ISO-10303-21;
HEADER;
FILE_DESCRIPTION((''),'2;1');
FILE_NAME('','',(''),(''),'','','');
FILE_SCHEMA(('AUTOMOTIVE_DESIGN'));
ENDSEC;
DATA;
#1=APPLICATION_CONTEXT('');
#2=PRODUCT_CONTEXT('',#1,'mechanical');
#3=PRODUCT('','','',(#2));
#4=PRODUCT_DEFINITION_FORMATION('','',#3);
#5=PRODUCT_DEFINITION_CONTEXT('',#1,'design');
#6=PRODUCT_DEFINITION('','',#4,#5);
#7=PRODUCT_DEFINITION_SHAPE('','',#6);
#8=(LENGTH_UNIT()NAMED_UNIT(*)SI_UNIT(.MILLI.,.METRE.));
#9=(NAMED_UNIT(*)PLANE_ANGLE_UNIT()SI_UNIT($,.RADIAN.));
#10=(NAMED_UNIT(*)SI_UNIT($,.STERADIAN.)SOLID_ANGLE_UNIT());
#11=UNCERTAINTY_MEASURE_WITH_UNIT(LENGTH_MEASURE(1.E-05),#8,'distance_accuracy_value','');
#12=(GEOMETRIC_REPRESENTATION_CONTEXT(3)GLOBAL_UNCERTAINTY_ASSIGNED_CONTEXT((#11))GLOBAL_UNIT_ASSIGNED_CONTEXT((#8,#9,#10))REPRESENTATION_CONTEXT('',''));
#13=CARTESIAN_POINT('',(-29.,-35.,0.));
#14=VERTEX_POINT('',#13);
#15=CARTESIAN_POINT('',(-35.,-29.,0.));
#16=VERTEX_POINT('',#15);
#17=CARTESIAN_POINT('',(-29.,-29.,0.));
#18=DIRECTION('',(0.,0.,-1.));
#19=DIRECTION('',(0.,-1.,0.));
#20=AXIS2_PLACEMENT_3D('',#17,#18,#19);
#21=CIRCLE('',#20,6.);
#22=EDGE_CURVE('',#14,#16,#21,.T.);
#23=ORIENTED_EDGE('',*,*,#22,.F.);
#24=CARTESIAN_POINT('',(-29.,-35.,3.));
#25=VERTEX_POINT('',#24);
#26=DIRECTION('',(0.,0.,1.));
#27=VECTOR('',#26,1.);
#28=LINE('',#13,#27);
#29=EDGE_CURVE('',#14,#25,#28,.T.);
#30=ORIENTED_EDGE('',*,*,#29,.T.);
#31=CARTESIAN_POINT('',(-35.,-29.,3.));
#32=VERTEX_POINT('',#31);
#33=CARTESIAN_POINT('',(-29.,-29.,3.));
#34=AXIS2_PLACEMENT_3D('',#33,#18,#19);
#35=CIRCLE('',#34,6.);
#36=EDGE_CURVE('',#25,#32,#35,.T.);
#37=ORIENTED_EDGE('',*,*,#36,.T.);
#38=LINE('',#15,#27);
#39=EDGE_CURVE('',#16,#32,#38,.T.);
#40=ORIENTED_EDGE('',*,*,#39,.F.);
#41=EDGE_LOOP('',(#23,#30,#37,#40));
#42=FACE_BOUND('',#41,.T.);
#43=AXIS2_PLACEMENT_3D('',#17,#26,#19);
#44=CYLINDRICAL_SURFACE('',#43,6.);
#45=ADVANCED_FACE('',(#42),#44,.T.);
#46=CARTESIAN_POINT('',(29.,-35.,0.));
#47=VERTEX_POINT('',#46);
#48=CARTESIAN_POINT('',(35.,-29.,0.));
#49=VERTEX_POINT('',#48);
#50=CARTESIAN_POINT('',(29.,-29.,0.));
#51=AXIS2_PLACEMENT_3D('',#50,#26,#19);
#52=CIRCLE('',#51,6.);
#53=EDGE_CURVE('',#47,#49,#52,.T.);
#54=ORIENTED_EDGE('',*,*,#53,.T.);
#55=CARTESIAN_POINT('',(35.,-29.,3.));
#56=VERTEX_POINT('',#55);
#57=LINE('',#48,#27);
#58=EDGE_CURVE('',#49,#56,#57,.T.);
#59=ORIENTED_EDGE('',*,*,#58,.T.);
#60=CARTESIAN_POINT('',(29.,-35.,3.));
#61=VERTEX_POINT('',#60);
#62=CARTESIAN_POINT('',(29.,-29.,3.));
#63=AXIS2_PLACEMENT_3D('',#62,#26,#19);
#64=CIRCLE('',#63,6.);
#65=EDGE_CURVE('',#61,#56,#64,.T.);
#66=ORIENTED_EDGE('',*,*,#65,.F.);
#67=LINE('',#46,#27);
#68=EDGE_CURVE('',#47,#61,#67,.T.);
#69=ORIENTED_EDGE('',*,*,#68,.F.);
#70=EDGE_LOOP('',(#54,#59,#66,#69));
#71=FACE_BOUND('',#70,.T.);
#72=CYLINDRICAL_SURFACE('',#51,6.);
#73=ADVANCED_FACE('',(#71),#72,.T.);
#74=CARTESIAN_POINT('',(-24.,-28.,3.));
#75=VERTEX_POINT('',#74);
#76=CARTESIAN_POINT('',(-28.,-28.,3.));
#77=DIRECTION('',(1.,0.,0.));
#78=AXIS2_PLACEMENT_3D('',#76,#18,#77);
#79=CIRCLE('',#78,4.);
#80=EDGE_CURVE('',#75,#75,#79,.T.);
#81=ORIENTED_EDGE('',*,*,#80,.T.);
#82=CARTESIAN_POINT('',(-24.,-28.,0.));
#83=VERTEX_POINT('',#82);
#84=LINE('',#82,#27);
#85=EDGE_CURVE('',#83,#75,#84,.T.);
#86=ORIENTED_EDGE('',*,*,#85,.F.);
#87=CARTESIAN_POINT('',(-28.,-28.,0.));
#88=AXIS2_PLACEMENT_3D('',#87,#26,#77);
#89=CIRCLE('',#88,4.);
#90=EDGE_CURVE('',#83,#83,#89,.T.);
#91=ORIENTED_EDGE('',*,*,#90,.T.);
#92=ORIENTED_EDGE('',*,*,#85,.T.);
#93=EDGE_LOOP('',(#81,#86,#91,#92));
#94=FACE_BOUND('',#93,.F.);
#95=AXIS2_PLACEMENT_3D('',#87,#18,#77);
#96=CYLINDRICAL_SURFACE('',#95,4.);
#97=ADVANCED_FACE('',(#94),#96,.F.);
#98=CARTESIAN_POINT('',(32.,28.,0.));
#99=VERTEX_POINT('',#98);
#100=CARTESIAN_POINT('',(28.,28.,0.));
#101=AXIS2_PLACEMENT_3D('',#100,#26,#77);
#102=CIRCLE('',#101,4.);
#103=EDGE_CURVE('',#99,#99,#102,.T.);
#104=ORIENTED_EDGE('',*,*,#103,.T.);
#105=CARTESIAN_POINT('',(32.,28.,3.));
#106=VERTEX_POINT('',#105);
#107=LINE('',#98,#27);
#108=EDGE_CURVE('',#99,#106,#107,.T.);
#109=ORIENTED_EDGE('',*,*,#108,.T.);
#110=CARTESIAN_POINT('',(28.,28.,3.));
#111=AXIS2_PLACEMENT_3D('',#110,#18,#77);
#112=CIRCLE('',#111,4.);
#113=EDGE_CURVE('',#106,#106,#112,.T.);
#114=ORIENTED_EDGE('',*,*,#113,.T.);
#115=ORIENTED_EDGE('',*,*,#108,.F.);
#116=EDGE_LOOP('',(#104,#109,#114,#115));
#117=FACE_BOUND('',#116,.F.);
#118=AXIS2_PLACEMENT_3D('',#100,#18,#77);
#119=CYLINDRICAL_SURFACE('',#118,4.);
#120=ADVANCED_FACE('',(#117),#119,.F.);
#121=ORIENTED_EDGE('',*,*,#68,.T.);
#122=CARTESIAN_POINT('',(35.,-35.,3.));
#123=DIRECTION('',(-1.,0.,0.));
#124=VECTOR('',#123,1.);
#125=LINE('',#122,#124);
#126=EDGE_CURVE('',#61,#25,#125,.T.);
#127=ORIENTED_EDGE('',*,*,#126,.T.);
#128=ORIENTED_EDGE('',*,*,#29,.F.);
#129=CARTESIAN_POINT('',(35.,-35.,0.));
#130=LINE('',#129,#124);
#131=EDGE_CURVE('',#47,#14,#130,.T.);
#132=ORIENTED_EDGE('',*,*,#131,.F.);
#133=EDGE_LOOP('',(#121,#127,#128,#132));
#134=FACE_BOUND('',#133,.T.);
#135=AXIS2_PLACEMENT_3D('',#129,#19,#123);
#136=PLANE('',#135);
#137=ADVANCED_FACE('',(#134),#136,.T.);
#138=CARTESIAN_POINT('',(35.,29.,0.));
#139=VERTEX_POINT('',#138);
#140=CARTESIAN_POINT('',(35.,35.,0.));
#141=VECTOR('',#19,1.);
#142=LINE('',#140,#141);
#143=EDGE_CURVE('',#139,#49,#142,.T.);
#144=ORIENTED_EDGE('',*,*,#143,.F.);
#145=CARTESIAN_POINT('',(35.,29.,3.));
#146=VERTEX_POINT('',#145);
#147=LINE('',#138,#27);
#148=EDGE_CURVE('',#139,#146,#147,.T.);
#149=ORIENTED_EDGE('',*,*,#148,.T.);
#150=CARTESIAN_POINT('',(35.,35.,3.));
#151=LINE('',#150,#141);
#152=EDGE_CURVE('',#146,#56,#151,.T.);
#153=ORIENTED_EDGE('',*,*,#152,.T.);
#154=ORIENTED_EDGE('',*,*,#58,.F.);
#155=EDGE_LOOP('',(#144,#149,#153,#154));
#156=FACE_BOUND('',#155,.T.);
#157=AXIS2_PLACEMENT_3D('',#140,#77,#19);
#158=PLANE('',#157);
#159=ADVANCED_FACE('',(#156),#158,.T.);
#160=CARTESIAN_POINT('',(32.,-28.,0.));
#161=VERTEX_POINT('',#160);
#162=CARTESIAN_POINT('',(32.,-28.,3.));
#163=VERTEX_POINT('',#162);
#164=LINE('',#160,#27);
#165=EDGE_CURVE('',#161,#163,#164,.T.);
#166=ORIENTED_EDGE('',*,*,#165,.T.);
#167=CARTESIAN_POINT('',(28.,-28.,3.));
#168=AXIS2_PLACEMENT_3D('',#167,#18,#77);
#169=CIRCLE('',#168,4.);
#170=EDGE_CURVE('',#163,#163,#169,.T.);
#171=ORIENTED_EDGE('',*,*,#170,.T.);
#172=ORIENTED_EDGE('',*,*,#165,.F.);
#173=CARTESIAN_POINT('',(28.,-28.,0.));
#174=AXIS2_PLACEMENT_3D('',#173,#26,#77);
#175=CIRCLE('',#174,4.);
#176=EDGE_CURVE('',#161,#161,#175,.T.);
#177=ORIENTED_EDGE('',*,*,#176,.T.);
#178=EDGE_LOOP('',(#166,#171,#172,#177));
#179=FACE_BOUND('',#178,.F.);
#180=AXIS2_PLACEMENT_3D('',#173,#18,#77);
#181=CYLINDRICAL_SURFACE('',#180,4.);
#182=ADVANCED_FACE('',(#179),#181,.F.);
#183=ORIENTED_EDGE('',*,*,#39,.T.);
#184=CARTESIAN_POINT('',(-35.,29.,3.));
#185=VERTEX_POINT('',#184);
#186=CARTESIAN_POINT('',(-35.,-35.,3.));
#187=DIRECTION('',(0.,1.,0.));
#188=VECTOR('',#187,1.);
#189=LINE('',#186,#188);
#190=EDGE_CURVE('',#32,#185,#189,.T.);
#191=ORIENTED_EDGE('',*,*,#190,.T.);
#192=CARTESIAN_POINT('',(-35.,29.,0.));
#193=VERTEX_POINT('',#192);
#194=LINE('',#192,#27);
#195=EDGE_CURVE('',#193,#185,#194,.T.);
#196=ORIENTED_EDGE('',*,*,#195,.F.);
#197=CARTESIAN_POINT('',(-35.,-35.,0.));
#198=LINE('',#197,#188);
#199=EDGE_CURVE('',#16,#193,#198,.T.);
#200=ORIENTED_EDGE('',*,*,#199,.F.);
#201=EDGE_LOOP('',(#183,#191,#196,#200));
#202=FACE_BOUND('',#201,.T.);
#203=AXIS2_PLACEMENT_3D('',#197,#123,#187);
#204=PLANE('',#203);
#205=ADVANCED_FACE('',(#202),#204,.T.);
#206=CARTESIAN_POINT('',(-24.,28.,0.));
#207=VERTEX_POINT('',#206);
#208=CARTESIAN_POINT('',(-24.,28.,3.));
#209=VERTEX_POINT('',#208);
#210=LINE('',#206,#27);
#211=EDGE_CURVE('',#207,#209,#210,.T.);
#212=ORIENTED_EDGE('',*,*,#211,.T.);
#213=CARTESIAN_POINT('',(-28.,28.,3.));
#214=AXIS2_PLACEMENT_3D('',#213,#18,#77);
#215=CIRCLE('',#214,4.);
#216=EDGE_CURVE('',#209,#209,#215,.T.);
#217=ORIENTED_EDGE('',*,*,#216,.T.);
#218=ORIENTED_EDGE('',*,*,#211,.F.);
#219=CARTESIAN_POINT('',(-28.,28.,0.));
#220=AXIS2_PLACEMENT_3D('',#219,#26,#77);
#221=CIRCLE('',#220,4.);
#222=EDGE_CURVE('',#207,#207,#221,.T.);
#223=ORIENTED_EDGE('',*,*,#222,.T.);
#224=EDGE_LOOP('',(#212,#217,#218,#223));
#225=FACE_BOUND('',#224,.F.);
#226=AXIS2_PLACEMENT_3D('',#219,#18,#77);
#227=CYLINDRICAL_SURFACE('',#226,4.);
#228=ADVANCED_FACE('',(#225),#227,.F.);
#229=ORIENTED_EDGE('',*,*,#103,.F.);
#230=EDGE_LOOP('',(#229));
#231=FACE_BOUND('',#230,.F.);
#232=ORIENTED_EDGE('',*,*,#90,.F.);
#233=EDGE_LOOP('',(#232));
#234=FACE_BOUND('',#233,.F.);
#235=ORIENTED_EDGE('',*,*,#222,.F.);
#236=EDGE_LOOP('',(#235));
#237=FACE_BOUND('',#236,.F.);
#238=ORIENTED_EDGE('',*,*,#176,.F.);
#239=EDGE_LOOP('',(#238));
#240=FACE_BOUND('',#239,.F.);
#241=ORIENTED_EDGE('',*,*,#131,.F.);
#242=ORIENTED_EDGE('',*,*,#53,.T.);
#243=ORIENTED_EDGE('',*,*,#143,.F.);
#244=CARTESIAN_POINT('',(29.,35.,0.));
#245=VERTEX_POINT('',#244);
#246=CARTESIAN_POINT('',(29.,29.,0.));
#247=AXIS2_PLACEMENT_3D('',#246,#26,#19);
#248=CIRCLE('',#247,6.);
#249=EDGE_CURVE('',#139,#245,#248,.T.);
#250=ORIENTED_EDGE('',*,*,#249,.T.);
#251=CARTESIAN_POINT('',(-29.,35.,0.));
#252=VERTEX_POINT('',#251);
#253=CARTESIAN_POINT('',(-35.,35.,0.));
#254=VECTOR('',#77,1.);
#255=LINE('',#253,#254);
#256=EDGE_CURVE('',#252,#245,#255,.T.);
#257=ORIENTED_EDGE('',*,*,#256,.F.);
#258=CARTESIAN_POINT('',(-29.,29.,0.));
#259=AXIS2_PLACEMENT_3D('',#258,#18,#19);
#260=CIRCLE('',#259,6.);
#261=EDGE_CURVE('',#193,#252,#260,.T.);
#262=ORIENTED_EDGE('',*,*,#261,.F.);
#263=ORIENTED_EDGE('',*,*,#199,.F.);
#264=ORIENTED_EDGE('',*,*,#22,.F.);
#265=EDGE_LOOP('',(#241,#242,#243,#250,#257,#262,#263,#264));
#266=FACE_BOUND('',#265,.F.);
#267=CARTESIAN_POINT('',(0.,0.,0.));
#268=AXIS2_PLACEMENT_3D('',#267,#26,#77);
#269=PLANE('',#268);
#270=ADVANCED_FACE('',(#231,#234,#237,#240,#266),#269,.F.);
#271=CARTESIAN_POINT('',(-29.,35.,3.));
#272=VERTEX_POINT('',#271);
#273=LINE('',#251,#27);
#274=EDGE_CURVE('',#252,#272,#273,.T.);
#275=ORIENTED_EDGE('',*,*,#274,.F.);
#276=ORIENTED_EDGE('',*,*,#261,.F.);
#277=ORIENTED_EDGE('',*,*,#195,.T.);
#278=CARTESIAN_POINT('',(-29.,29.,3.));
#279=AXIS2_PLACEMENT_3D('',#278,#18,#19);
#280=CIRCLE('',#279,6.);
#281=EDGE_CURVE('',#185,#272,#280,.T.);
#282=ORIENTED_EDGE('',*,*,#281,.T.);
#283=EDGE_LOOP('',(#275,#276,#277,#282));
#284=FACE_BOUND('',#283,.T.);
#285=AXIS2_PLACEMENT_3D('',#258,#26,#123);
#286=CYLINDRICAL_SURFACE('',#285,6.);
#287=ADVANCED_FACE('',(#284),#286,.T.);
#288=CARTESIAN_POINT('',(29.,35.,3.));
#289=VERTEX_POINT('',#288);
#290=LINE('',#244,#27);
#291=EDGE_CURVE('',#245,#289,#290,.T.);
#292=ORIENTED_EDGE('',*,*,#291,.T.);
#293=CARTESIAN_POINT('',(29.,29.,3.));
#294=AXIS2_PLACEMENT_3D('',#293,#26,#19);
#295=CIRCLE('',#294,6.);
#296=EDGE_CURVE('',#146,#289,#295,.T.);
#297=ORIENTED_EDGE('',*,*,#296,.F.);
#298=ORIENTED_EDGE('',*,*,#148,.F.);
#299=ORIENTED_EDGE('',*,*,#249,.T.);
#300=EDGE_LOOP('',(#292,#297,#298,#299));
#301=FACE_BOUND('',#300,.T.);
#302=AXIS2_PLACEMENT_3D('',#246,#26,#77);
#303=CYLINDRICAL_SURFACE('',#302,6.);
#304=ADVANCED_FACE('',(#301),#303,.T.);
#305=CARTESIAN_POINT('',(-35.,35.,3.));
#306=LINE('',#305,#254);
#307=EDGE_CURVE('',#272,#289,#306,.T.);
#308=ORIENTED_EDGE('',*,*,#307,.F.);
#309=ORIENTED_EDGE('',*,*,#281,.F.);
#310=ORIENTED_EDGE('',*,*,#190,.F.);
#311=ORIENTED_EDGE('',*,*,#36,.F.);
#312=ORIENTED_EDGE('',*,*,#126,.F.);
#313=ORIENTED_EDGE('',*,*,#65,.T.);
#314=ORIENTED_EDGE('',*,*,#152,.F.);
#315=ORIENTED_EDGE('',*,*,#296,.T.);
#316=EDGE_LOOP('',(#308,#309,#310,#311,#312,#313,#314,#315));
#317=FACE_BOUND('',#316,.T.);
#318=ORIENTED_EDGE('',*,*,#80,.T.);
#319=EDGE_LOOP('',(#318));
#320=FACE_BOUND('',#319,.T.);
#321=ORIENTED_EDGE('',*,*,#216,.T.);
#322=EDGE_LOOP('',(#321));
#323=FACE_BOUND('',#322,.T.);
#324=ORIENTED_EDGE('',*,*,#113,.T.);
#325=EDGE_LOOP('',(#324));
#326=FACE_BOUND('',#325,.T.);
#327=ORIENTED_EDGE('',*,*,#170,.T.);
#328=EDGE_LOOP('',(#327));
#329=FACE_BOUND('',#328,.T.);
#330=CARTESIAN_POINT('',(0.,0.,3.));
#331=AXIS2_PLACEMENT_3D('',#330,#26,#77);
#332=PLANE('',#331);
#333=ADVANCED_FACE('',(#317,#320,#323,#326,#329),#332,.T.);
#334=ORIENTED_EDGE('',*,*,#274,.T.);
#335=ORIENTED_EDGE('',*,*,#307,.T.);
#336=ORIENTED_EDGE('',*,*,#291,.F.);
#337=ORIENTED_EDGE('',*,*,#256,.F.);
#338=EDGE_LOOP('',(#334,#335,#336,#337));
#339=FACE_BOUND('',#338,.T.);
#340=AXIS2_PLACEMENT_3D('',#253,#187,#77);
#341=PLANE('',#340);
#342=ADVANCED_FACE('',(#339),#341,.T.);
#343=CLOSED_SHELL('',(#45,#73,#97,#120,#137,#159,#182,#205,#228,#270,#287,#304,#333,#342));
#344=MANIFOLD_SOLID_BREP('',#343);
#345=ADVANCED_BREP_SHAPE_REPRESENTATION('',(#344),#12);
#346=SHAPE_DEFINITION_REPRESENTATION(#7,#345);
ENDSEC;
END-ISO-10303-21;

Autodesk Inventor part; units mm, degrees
ref_plane "YZ Plane" through (0, 0, 0) normal (1, 0, 0) x (0, 1, 0)
ref_plane "XZ Plane" through (0, 0, 0) normal (0, 1, 0) x (-1, 0, 0)
ref_plane "XY Plane" through (0, 0, 0) normal (0, 0, 1) x (1, 0, 0)
sketch "Sketch1" plane through (0, 0, 0) normal (0, 0, 1) x (1, 0, 0)
  line L0 (35, -35) -> (-35, -35)
  line L1 (-35, -35) -> (-35, 35)
  line L2 (-35, 35) -> (35, 35)
  line L3 (35, 35) -> (35, -35)
  line L4 (35, 35) -> (-35, -35) construction
  point P0 (0, 0)
  point P1 (0, 0)
  dimension "d1" = 70
  dimension "d2" = 70
extrude "Plate1" add sketch "Sketch1" along normal blind 3
sketch "Sketch2" plane through (0, 0, 0) normal (0, 0, 1) x (1, 0, 0)
  line L0 (28, -28) -> (-28, -28) construction
  line L1 (-28, -28) -> (-28, 28) construction
  line L2 (-28, 28) -> (28, 28) construction
  line L3 (28, 28) -> (28, -28) construction
  line L4 (28, -28) -> (-28, 28) construction
  line L5 (-28, -28) -> (28, 28) construction
  circle A0 centre (-28, -28) radius 4
  circle A1 centre (28, -28) radius 4
  circle A2 centre (28, 28) radius 4
  circle A3 centre (-28, 28) radius 4
  line L6 (28, 0) -> (-28, 0) construction
  line L7 (-20, 20) -> (20, 20) construction
  line L8 (20, 20) -> (20, -20) construction
  line L9 (20, -20) -> (-20, -20) construction
  line L10 (-20, -20) -> (-20, 20) construction
  line L11 (-20, 20) -> (20, -20) construction
  line L12 (20, 20) -> (-20, -20) construction
  line L13 (-35, -35) -> (-35, 35) projected
  line L14 (35, -35) -> (-35, -35) projected
  line L15 (35, 35) -> (35, -35) projected
  line L16 (-35, 35) -> (35, 35) projected
  point P0 (0, 0)
  point P1 (75, 0)
  point P2 (0, 0)
  dimension "d7" = 8
  dimension "d33" = 40
  dimension "d35" = 7
extrude "Extrusion1" cut sketch "Sketch2" along normal through all contours A0 | A1 | A2 | A3
fillet "Corner Round1" radius 6 4 edges at (-35, 35, 1.5) (35, 35, 1.5) (35, -35, 1.5) (-35, -35, 1.5)
equation "\"d1\" = d2"
equation "\"d0\" = Thickness"
equation "\"BendRadius\" = Thickness"
equation "\"BendReliefWidth\" = Thickness"
equation "\"BendReliefDepth\" = 0.5 * Thickness"
equation "\"CornerReliefSize\" = 4 * Thickness"
equation "\"MinimumRemnant\" = 2 * Thickness"
equation "\"TransitionRadius\" = BendRadius"
equation "\"JacobiRadiusSize\" = BendRadius"
equation "\"GapSize\" = Thickness"
equation "\"Thickness\" = 3"
properties part number "GNH 018  Plate pulse pillar" material "Stainless Steel"
